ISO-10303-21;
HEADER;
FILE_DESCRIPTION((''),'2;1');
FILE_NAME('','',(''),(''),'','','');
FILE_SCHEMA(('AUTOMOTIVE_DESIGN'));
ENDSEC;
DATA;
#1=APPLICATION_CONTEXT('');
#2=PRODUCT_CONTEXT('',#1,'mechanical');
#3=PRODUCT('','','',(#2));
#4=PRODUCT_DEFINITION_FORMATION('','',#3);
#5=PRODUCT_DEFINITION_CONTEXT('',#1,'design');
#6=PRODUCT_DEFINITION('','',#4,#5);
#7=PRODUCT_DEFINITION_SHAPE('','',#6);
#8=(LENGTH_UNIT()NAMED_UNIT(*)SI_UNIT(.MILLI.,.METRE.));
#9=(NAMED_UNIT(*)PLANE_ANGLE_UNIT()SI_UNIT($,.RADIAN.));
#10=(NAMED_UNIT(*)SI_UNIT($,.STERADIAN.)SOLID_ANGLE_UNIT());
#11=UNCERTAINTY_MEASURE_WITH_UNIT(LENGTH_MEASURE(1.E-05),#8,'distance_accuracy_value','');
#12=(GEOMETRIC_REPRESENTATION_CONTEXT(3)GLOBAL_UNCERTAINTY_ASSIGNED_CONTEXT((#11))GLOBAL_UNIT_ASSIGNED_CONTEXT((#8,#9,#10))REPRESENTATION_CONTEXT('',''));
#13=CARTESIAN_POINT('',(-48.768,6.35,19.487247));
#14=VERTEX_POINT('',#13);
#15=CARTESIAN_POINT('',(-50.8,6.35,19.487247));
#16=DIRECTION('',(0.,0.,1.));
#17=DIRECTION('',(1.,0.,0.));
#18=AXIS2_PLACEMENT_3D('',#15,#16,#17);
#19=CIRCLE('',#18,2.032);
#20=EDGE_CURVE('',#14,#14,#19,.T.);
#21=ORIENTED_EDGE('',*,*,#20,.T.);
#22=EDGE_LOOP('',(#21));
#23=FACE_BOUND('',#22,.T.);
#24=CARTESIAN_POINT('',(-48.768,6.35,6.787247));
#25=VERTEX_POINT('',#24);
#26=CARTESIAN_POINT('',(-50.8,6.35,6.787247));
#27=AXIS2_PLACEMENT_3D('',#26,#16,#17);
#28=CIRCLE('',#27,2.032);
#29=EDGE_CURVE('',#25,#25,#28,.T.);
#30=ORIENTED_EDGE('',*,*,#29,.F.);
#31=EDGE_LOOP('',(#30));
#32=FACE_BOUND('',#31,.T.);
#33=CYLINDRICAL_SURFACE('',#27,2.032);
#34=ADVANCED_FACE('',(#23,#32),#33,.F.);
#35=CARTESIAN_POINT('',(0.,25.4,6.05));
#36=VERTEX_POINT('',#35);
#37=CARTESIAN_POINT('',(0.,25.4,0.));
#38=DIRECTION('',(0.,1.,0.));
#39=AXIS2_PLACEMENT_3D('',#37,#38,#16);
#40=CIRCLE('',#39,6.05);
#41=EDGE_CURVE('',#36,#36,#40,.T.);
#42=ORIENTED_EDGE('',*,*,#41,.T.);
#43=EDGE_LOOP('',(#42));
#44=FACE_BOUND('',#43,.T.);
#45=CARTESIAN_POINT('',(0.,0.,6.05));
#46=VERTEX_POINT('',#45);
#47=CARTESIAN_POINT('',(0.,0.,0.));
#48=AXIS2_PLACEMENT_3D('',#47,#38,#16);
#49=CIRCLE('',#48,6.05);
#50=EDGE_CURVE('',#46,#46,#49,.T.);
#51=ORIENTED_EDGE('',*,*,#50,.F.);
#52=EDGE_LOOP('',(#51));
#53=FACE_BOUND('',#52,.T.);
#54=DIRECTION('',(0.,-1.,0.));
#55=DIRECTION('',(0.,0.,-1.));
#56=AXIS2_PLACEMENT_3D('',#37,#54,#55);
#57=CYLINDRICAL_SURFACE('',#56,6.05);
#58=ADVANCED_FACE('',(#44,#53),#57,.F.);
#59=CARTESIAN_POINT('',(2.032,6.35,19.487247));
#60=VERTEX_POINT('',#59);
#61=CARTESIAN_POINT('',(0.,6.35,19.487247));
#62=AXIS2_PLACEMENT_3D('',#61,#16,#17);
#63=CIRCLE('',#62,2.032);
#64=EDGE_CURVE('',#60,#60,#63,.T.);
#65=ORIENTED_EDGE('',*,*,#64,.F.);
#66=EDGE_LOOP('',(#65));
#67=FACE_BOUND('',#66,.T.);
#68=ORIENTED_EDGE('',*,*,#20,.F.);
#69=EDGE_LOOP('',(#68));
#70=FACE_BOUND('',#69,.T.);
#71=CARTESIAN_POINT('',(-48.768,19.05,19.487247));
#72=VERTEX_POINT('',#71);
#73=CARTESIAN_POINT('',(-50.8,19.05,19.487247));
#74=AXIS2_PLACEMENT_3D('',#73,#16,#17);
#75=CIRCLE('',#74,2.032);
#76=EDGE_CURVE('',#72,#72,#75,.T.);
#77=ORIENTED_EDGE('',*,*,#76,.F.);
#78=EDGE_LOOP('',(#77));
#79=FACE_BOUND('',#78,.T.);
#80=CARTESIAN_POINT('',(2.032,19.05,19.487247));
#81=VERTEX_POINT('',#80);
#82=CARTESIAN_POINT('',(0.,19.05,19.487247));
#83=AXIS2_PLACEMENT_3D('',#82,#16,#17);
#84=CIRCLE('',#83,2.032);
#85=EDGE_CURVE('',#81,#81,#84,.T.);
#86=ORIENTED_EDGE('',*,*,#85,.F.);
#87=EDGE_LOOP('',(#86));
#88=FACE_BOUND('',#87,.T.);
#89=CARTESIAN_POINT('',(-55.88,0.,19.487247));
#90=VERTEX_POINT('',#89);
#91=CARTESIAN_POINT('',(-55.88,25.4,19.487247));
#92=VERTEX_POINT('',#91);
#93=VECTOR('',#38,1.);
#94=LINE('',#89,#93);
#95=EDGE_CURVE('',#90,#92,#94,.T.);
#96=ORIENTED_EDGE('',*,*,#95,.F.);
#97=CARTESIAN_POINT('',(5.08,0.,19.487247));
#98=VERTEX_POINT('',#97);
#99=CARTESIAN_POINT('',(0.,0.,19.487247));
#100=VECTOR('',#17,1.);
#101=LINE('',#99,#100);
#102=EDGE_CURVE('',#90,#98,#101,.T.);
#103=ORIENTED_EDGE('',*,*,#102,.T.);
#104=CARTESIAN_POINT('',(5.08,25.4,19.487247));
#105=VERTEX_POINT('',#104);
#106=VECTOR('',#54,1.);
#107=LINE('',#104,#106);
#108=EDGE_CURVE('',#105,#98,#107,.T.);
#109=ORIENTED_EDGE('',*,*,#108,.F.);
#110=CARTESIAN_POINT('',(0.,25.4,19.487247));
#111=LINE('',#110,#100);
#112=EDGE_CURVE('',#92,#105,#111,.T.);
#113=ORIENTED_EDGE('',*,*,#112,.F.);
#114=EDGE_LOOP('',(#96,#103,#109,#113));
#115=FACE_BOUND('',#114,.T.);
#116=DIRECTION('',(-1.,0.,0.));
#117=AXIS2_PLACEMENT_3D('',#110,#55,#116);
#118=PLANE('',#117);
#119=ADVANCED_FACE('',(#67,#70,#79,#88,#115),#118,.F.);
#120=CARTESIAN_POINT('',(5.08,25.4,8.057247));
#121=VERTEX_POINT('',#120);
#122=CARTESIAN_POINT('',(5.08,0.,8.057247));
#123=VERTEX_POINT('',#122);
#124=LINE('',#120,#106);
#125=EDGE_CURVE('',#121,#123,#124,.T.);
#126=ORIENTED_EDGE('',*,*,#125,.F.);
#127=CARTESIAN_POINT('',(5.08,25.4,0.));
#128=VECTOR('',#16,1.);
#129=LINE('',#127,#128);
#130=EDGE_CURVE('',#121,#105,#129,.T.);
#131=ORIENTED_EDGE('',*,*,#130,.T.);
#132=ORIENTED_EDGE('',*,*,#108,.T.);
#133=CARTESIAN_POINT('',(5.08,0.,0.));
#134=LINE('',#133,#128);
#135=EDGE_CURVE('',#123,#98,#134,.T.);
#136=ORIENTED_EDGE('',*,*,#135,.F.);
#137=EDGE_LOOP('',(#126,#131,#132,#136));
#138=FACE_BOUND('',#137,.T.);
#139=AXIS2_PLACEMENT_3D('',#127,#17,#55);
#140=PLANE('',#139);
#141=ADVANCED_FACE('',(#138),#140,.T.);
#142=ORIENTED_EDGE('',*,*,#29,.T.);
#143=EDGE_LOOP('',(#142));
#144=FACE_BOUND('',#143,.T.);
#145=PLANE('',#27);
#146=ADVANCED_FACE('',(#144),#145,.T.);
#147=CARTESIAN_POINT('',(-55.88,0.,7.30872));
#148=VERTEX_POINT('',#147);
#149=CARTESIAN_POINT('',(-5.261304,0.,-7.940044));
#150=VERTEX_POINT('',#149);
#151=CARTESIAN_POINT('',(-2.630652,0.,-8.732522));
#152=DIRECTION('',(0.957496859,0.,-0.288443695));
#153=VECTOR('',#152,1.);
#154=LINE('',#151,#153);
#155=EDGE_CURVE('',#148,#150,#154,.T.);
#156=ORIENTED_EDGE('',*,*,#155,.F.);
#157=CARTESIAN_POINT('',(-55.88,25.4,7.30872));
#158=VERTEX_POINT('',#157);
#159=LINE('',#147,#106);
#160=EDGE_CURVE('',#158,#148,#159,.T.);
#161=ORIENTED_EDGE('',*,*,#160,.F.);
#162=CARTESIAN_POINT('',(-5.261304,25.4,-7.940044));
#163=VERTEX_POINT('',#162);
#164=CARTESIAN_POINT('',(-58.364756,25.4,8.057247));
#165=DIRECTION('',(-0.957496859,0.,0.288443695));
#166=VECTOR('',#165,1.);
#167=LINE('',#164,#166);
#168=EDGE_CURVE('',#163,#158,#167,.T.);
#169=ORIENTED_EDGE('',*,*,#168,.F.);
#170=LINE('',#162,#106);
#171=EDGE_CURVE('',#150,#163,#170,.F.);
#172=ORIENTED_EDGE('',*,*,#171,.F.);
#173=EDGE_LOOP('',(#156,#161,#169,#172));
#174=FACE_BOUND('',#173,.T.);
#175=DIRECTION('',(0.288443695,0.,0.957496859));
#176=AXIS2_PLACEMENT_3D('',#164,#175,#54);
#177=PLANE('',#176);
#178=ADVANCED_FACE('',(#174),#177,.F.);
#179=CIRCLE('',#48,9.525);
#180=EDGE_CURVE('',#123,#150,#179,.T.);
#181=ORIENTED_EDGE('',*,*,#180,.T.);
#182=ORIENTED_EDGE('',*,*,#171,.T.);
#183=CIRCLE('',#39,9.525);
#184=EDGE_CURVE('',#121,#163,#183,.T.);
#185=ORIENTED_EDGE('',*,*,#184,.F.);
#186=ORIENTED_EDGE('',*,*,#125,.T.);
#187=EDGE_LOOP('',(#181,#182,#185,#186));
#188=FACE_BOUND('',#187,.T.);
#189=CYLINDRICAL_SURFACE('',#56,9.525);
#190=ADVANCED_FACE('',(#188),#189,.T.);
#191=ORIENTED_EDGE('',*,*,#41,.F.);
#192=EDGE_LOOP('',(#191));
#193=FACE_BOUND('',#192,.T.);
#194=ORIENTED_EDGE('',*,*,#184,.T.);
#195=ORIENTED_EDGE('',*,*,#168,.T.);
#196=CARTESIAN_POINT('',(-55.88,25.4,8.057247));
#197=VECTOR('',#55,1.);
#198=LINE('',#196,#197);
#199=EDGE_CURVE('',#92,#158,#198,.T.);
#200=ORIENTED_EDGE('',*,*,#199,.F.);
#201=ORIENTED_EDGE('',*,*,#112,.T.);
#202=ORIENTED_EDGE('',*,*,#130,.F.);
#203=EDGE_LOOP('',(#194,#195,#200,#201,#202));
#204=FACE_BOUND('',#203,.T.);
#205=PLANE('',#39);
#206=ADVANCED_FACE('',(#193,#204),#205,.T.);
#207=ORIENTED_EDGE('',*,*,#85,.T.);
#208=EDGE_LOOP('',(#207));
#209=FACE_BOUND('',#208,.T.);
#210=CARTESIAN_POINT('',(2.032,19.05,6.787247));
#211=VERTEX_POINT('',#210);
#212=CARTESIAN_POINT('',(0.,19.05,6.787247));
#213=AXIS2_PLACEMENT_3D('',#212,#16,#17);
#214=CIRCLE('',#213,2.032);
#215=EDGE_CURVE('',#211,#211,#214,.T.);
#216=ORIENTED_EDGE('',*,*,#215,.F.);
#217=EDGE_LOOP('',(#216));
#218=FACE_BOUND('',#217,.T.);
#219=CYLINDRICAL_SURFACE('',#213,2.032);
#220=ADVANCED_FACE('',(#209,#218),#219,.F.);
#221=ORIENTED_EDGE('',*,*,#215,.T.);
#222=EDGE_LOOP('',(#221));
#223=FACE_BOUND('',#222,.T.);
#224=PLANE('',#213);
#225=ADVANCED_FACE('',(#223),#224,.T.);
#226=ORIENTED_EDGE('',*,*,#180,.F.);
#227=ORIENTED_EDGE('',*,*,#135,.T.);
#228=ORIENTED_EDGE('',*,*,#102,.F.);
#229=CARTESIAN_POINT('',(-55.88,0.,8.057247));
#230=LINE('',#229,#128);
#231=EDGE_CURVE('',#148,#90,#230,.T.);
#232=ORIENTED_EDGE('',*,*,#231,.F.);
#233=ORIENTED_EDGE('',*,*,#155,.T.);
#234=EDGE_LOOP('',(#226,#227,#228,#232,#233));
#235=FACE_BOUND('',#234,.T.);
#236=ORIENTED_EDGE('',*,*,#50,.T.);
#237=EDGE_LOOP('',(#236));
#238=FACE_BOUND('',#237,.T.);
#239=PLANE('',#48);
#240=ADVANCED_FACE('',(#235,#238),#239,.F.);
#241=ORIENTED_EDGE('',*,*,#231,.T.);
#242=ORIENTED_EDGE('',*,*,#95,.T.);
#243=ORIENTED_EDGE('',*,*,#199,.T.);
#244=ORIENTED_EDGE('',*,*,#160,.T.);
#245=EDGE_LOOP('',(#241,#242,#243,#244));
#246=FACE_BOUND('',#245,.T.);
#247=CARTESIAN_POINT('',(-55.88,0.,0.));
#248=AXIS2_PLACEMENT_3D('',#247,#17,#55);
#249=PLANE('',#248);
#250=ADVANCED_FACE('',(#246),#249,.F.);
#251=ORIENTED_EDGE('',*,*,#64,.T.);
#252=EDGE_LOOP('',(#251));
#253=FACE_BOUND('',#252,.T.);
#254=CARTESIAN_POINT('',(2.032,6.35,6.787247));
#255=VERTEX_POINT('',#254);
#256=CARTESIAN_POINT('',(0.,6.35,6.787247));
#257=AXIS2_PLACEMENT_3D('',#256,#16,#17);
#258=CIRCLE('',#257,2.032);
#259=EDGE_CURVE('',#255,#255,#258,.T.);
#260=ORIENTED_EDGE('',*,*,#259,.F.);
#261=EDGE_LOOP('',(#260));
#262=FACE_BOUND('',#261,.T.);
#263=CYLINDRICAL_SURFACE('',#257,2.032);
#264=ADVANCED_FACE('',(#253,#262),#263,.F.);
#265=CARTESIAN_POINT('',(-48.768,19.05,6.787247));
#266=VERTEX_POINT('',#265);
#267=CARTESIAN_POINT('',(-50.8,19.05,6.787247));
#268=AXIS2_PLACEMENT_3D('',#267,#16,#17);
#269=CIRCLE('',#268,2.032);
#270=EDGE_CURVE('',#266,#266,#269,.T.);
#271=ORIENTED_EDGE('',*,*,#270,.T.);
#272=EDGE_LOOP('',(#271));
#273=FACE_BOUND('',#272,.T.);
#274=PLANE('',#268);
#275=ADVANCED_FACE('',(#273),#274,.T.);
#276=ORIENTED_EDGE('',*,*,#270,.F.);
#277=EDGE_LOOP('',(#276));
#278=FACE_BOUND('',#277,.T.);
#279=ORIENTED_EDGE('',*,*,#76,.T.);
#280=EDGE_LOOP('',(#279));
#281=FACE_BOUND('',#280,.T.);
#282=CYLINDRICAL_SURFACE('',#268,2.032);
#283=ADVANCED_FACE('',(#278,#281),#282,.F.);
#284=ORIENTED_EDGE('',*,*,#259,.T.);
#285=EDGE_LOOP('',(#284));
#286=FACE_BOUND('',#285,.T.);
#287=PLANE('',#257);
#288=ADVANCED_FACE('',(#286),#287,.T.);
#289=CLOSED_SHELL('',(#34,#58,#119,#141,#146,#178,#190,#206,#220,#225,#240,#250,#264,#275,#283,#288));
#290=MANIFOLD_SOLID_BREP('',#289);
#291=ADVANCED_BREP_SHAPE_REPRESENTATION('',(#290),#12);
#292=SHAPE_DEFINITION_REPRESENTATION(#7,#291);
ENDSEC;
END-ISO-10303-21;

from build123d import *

# Parameters (mm, degrees)
SKETCH1_W           = 10.16
SKETCH1_H           = 5.08
SKETCH1_R           = 6.049999965
BOSS_EXTRUDE1_DEPTH = 25.4
SKETCH6_W           = 11.43
SKETCH6_H           = 25.4
BOSS_EXTRUDE3_DEPTH = 50.8
CHAMFER2_DEPTH      = 25.4
SKETCH4_R           = 2.032
CUT_EXTRUDE2_DEPTH  = 12.7


with BuildPart() as part:
    # Sketch1 → Boss-Extrude1 (new body)
    # profile 1 of 4: a face of its own
    with BuildSketch(Plane(origin=(0, 0, 0), x_dir=(1, 0, 0), z_dir=(0, 1, 0))):
        with BuildLine():
            Line((-5.08, -8.057246738), (-5.08, -14.407246738))
            Line((-5.08, -14.407246738), (5.08, -14.407246738))
            Line((5.08, -14.407246738), (5.08, -8.057246738))
            ThreePointArc((5.08, -8.057246738), (0, -9.525), (-5.08, -8.057246738))
        make_face()
    # profile 2 of 4: a face of its own
    with BuildSketch(Plane(origin=(0, 0, 0), x_dir=(1, 0, 0), z_dir=(0, 1, 0))):
        with Locations((0, -16.947246738)):
            Rectangle(SKETCH1_W, SKETCH1_H)
    # profile 3 of 4: a face of its own
    with BuildSketch(Plane(origin=(0, 0, 0), x_dir=(1, 0, 0), z_dir=(0, 1, 0))):
        with BuildLine():
            ThreePointArc((9.525, 0), (-4.601012117, 8.340042716), (-5.08, -8.057246738))
            Line((-5.08, -8.057246738), (5.08, -8.057246738))
            ThreePointArc((5.08, -8.057246738), (8.340042716, -4.601012117), (9.525, 0))
        make_face()
        with Locations(Location((0, 0, 0), (0, 0, 270))):
            Circle(SKETCH1_R, mode=Mode.SUBTRACT)
    # profile 4 of 4: a face of its own
    with BuildSketch(Plane(origin=(0, 0, 0), x_dir=(1, 0, 0), z_dir=(0, 1, 0))):
        with BuildLine():
            Line((5.08, -8.057246738), (-5.08, -8.057246738))
            ThreePointArc((-5.08, -8.057246738), (0, -9.525), (5.08, -8.057246738))
        make_face()
    extrude(amount=BOSS_EXTRUDE1_DEPTH)

    # Sketch6 → Boss-Extrude3 (add)
    with BuildSketch(Plane.ZY.offset(5.08)):
        with Locations((13.772246738, 12.7)):
            Rectangle(SKETCH6_W, SKETCH6_H)
    extrude(amount=BOSS_EXTRUDE3_DEPTH)

    # Chamfer2: read off the stored shape, not the designer's step
    # Chamfer2 outline → Chamfer2 (add)
    with BuildSketch(Plane(origin=(0, 0, 0), x_dir=(1, 0, 0), z_dir=(0, 1, 0))):
        with BuildLine():
            Line((-5.261303905, 7.940044472), (-55.88, -7.308719642))
            Line((-55.88, -7.308719642), (-55.88, -8.057246738))
            Line((-55.88, -8.057246738), (-5.08, -8.057246738))
            ThreePointArc((-5.08, -8.057246738), (-9.524388334, -0.107943825), (-5.261303905, 7.940044472))
        make_face()
    extrude(amount=CHAMFER2_DEPTH)

    # Sketch4 → Cut-Extrude2 (cut)
    with BuildSketch(Plane.XY.offset(19.487246738)):
        with Locations((0, 19.05)):
            Circle(SKETCH4_R)
        with Locations((0, 6.35)):
            Circle(SKETCH4_R)
        with Locations((-50.8, 19.05)):
            Circle(SKETCH4_R)
        with Locations((-50.8, 6.35)):
            Circle(SKETCH4_R)
    extrude(amount=-CUT_EXTRUDE2_DEPTH, mode=Mode.SUBTRACT)


solid = part.part
